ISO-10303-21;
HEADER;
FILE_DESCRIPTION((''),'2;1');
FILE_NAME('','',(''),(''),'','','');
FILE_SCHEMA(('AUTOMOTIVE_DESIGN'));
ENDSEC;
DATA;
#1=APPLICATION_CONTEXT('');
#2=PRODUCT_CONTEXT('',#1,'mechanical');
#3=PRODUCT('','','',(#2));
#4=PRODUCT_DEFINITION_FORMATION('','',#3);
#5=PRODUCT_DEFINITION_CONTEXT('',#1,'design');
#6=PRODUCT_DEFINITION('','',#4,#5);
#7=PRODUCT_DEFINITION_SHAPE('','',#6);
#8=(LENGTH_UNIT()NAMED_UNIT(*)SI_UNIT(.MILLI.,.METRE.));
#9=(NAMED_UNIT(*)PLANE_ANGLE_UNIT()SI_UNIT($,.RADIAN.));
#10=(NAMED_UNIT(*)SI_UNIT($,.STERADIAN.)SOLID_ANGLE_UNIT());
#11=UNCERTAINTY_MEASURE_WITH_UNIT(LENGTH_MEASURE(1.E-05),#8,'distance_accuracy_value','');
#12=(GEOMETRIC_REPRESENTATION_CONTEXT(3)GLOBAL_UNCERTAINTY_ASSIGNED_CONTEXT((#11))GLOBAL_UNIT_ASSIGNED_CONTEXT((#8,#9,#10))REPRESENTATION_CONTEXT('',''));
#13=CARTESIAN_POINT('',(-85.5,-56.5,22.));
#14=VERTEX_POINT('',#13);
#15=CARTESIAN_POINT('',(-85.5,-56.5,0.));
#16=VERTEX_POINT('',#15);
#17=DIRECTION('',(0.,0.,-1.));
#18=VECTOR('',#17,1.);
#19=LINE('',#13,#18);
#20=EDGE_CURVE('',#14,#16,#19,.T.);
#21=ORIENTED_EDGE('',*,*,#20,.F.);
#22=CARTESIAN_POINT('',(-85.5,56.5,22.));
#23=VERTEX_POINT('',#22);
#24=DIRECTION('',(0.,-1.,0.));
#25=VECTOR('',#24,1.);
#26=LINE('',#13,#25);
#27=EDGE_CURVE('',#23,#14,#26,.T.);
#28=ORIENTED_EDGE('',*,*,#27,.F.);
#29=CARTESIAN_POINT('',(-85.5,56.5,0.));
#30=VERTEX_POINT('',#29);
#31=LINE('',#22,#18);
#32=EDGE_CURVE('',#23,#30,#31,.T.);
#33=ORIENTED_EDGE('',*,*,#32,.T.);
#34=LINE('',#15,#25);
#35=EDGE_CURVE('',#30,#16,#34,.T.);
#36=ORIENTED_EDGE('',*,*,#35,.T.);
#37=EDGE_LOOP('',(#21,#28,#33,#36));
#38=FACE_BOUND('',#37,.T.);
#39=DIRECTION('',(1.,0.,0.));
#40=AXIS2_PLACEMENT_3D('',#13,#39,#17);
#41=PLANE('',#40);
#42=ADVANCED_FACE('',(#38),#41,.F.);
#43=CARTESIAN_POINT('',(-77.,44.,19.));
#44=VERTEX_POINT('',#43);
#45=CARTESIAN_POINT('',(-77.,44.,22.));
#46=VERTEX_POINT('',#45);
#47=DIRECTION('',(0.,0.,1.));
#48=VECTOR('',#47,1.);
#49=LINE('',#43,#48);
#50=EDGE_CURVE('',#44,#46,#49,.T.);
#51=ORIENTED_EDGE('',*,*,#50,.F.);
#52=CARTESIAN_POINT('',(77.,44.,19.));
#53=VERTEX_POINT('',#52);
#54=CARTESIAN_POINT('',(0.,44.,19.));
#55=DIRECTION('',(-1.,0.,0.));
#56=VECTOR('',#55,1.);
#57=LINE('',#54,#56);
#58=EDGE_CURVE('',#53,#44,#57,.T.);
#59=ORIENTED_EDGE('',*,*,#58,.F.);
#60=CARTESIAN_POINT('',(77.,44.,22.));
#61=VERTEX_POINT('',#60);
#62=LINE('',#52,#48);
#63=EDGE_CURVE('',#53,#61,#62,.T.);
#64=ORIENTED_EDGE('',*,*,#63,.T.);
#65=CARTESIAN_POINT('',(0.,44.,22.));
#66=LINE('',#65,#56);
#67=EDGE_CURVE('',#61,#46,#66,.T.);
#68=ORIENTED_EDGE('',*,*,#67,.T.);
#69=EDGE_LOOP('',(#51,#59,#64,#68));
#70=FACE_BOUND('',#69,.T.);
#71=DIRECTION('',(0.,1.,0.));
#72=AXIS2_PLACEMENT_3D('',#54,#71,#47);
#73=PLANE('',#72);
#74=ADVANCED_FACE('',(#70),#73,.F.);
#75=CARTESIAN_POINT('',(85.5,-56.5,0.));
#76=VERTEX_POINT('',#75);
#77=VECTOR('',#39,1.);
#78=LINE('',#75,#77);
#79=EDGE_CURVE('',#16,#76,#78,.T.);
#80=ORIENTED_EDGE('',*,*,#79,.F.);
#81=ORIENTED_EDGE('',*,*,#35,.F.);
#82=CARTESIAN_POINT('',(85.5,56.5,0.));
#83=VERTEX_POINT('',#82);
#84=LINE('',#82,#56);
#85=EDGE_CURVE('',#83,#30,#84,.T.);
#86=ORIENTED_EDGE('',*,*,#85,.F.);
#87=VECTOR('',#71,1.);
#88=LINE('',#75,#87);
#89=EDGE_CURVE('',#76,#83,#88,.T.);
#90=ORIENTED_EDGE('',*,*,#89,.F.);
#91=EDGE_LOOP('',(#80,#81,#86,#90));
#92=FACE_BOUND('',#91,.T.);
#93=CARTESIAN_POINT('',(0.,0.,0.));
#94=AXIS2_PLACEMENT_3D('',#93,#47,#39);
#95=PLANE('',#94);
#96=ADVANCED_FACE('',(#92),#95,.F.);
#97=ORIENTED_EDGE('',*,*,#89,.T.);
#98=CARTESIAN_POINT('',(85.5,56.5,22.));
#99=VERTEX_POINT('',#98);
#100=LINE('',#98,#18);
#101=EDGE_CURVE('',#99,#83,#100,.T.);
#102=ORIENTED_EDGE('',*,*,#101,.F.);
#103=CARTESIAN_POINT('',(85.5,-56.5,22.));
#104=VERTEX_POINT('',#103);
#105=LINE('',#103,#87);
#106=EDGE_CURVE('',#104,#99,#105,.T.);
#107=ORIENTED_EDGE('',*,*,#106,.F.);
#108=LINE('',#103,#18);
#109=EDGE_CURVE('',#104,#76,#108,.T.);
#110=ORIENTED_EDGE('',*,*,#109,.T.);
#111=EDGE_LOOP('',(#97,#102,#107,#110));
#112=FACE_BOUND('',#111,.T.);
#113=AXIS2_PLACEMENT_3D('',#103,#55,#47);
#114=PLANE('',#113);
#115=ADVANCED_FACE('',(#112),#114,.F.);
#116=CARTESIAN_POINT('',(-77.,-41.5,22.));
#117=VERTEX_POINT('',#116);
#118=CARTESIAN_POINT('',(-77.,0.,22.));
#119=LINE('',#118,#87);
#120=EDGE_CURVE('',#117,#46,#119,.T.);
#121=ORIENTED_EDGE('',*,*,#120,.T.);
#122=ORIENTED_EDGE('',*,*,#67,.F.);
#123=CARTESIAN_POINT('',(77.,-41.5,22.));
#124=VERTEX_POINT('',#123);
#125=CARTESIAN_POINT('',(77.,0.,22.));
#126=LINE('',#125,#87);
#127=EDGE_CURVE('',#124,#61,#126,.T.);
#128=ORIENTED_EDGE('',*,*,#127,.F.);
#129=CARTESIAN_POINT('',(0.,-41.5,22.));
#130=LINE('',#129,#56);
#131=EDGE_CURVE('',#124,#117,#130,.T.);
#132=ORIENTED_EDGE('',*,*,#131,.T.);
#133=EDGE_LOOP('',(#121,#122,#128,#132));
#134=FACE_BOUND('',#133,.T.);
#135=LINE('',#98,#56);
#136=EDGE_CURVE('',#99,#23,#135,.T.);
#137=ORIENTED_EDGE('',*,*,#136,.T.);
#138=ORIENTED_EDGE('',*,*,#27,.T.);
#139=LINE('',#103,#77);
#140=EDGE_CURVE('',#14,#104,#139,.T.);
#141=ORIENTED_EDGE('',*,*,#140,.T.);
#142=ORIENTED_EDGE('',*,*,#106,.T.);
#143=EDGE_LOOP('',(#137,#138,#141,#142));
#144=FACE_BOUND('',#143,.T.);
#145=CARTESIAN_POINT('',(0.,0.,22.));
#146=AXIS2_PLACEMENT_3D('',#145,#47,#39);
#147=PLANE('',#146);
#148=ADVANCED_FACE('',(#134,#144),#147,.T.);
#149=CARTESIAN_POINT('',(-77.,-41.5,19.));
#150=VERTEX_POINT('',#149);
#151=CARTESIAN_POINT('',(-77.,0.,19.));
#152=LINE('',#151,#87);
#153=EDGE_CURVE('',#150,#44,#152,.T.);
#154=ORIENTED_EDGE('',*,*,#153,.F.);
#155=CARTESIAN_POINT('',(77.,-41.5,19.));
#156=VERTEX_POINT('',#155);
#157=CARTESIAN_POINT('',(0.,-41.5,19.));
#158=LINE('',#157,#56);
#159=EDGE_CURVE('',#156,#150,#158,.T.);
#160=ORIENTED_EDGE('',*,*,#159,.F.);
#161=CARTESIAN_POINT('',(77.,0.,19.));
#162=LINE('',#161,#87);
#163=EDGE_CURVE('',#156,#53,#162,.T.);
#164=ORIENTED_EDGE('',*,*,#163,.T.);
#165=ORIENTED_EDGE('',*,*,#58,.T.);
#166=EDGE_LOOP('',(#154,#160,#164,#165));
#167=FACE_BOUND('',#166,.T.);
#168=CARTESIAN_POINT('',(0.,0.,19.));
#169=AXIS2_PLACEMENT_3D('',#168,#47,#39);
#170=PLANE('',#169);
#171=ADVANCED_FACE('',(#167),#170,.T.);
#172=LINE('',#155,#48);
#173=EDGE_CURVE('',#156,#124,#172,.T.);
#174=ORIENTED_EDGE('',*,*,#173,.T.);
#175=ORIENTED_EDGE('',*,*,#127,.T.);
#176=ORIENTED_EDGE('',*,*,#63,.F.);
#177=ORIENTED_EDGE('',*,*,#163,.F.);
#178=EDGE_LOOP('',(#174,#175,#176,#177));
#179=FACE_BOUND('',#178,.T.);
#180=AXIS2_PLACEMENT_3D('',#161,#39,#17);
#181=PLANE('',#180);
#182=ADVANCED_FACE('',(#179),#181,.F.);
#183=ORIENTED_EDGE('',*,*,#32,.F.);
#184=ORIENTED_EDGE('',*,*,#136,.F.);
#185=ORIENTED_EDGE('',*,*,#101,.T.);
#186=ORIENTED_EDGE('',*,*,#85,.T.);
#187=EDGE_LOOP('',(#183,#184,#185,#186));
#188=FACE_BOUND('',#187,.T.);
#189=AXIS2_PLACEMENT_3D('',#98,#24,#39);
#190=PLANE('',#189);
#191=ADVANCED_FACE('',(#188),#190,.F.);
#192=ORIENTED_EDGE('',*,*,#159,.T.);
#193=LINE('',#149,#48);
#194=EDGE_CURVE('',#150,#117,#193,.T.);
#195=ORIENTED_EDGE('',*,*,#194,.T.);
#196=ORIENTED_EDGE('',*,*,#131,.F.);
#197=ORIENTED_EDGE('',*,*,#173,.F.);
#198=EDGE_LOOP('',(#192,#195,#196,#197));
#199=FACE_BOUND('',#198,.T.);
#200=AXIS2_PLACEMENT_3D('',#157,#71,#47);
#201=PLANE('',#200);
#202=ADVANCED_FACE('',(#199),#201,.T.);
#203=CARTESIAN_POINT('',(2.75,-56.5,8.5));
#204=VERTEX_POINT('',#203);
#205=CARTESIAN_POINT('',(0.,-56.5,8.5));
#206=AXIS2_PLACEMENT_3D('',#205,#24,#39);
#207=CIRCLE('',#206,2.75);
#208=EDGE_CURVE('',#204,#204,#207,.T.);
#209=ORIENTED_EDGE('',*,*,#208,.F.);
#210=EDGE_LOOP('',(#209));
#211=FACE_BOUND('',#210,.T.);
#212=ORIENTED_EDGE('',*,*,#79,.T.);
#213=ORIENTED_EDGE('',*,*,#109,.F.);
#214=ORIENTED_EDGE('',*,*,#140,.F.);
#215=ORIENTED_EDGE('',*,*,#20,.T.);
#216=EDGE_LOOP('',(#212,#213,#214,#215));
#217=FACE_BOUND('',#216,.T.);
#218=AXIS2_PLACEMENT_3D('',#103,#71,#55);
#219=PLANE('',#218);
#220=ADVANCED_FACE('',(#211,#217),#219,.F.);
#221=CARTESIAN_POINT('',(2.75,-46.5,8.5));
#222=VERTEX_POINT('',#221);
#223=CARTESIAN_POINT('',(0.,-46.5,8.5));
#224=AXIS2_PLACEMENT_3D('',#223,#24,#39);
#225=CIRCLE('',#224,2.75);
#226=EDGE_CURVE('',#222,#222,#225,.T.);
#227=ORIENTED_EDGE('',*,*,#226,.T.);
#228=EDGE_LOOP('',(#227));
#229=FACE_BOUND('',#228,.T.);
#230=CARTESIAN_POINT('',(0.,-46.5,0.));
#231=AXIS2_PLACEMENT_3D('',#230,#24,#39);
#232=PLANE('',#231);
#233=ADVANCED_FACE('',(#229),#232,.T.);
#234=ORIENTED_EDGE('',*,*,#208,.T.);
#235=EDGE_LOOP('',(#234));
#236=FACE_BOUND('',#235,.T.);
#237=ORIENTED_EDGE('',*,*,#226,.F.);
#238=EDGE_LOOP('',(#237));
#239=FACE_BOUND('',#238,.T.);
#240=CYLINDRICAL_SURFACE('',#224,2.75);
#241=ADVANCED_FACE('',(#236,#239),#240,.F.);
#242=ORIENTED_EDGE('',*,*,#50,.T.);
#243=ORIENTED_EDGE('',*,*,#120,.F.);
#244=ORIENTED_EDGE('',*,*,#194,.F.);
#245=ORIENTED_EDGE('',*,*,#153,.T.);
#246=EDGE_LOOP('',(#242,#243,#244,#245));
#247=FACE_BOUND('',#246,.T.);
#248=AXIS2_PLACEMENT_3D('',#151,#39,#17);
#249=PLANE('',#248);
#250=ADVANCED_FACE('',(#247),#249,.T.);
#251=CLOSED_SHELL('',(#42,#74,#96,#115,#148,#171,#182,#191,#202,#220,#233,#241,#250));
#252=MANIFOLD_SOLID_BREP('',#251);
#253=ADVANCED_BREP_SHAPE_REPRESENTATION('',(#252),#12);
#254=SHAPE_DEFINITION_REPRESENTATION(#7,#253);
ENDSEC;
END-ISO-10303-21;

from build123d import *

# Parameters (mm, degrees)
SKETCH1_W          = 171
SKETCH1_H          = 113
EXTRUDE1_DEPTH     = 22
EXTRUDE2_START     = -3
EXTRUDE2_OUTLINE_W = 154
EXTRUDE2_OUTLINE_H = 85.5
EXTRUDE2_DEPTH     = 3
SKETCH3_R          = 2.75
EXTRUDE3_DEPTH     = 10


# Read off the part's stored shape, not the designer's step: Extrude2
with BuildPart() as part:
    # Sketch1 → Extrude1 (new body)
    with BuildSketch(Plane.XY):
        Rectangle(SKETCH1_W, SKETCH1_H)
    extrude(amount=EXTRUDE1_DEPTH)

    # Extrude2 outline → Extrude2 (cut)
    with BuildSketch(Plane.XY.offset(22).offset(EXTRUDE2_START)):
        with Locations((0, 1.25)):
            Rectangle(EXTRUDE2_OUTLINE_W, EXTRUDE2_OUTLINE_H)
    extrude(amount=EXTRUDE2_DEPTH, mode=Mode.SUBTRACT)

    # Sketch3 → Extrude3 (cut)
    with BuildSketch(Plane.XZ.offset(56.5)):
        with Locations((0, 8.5)):
            Circle(SKETCH3_R)
    extrude(amount=-EXTRUDE3_DEPTH, mode=Mode.SUBTRACT)


solid = part.part
